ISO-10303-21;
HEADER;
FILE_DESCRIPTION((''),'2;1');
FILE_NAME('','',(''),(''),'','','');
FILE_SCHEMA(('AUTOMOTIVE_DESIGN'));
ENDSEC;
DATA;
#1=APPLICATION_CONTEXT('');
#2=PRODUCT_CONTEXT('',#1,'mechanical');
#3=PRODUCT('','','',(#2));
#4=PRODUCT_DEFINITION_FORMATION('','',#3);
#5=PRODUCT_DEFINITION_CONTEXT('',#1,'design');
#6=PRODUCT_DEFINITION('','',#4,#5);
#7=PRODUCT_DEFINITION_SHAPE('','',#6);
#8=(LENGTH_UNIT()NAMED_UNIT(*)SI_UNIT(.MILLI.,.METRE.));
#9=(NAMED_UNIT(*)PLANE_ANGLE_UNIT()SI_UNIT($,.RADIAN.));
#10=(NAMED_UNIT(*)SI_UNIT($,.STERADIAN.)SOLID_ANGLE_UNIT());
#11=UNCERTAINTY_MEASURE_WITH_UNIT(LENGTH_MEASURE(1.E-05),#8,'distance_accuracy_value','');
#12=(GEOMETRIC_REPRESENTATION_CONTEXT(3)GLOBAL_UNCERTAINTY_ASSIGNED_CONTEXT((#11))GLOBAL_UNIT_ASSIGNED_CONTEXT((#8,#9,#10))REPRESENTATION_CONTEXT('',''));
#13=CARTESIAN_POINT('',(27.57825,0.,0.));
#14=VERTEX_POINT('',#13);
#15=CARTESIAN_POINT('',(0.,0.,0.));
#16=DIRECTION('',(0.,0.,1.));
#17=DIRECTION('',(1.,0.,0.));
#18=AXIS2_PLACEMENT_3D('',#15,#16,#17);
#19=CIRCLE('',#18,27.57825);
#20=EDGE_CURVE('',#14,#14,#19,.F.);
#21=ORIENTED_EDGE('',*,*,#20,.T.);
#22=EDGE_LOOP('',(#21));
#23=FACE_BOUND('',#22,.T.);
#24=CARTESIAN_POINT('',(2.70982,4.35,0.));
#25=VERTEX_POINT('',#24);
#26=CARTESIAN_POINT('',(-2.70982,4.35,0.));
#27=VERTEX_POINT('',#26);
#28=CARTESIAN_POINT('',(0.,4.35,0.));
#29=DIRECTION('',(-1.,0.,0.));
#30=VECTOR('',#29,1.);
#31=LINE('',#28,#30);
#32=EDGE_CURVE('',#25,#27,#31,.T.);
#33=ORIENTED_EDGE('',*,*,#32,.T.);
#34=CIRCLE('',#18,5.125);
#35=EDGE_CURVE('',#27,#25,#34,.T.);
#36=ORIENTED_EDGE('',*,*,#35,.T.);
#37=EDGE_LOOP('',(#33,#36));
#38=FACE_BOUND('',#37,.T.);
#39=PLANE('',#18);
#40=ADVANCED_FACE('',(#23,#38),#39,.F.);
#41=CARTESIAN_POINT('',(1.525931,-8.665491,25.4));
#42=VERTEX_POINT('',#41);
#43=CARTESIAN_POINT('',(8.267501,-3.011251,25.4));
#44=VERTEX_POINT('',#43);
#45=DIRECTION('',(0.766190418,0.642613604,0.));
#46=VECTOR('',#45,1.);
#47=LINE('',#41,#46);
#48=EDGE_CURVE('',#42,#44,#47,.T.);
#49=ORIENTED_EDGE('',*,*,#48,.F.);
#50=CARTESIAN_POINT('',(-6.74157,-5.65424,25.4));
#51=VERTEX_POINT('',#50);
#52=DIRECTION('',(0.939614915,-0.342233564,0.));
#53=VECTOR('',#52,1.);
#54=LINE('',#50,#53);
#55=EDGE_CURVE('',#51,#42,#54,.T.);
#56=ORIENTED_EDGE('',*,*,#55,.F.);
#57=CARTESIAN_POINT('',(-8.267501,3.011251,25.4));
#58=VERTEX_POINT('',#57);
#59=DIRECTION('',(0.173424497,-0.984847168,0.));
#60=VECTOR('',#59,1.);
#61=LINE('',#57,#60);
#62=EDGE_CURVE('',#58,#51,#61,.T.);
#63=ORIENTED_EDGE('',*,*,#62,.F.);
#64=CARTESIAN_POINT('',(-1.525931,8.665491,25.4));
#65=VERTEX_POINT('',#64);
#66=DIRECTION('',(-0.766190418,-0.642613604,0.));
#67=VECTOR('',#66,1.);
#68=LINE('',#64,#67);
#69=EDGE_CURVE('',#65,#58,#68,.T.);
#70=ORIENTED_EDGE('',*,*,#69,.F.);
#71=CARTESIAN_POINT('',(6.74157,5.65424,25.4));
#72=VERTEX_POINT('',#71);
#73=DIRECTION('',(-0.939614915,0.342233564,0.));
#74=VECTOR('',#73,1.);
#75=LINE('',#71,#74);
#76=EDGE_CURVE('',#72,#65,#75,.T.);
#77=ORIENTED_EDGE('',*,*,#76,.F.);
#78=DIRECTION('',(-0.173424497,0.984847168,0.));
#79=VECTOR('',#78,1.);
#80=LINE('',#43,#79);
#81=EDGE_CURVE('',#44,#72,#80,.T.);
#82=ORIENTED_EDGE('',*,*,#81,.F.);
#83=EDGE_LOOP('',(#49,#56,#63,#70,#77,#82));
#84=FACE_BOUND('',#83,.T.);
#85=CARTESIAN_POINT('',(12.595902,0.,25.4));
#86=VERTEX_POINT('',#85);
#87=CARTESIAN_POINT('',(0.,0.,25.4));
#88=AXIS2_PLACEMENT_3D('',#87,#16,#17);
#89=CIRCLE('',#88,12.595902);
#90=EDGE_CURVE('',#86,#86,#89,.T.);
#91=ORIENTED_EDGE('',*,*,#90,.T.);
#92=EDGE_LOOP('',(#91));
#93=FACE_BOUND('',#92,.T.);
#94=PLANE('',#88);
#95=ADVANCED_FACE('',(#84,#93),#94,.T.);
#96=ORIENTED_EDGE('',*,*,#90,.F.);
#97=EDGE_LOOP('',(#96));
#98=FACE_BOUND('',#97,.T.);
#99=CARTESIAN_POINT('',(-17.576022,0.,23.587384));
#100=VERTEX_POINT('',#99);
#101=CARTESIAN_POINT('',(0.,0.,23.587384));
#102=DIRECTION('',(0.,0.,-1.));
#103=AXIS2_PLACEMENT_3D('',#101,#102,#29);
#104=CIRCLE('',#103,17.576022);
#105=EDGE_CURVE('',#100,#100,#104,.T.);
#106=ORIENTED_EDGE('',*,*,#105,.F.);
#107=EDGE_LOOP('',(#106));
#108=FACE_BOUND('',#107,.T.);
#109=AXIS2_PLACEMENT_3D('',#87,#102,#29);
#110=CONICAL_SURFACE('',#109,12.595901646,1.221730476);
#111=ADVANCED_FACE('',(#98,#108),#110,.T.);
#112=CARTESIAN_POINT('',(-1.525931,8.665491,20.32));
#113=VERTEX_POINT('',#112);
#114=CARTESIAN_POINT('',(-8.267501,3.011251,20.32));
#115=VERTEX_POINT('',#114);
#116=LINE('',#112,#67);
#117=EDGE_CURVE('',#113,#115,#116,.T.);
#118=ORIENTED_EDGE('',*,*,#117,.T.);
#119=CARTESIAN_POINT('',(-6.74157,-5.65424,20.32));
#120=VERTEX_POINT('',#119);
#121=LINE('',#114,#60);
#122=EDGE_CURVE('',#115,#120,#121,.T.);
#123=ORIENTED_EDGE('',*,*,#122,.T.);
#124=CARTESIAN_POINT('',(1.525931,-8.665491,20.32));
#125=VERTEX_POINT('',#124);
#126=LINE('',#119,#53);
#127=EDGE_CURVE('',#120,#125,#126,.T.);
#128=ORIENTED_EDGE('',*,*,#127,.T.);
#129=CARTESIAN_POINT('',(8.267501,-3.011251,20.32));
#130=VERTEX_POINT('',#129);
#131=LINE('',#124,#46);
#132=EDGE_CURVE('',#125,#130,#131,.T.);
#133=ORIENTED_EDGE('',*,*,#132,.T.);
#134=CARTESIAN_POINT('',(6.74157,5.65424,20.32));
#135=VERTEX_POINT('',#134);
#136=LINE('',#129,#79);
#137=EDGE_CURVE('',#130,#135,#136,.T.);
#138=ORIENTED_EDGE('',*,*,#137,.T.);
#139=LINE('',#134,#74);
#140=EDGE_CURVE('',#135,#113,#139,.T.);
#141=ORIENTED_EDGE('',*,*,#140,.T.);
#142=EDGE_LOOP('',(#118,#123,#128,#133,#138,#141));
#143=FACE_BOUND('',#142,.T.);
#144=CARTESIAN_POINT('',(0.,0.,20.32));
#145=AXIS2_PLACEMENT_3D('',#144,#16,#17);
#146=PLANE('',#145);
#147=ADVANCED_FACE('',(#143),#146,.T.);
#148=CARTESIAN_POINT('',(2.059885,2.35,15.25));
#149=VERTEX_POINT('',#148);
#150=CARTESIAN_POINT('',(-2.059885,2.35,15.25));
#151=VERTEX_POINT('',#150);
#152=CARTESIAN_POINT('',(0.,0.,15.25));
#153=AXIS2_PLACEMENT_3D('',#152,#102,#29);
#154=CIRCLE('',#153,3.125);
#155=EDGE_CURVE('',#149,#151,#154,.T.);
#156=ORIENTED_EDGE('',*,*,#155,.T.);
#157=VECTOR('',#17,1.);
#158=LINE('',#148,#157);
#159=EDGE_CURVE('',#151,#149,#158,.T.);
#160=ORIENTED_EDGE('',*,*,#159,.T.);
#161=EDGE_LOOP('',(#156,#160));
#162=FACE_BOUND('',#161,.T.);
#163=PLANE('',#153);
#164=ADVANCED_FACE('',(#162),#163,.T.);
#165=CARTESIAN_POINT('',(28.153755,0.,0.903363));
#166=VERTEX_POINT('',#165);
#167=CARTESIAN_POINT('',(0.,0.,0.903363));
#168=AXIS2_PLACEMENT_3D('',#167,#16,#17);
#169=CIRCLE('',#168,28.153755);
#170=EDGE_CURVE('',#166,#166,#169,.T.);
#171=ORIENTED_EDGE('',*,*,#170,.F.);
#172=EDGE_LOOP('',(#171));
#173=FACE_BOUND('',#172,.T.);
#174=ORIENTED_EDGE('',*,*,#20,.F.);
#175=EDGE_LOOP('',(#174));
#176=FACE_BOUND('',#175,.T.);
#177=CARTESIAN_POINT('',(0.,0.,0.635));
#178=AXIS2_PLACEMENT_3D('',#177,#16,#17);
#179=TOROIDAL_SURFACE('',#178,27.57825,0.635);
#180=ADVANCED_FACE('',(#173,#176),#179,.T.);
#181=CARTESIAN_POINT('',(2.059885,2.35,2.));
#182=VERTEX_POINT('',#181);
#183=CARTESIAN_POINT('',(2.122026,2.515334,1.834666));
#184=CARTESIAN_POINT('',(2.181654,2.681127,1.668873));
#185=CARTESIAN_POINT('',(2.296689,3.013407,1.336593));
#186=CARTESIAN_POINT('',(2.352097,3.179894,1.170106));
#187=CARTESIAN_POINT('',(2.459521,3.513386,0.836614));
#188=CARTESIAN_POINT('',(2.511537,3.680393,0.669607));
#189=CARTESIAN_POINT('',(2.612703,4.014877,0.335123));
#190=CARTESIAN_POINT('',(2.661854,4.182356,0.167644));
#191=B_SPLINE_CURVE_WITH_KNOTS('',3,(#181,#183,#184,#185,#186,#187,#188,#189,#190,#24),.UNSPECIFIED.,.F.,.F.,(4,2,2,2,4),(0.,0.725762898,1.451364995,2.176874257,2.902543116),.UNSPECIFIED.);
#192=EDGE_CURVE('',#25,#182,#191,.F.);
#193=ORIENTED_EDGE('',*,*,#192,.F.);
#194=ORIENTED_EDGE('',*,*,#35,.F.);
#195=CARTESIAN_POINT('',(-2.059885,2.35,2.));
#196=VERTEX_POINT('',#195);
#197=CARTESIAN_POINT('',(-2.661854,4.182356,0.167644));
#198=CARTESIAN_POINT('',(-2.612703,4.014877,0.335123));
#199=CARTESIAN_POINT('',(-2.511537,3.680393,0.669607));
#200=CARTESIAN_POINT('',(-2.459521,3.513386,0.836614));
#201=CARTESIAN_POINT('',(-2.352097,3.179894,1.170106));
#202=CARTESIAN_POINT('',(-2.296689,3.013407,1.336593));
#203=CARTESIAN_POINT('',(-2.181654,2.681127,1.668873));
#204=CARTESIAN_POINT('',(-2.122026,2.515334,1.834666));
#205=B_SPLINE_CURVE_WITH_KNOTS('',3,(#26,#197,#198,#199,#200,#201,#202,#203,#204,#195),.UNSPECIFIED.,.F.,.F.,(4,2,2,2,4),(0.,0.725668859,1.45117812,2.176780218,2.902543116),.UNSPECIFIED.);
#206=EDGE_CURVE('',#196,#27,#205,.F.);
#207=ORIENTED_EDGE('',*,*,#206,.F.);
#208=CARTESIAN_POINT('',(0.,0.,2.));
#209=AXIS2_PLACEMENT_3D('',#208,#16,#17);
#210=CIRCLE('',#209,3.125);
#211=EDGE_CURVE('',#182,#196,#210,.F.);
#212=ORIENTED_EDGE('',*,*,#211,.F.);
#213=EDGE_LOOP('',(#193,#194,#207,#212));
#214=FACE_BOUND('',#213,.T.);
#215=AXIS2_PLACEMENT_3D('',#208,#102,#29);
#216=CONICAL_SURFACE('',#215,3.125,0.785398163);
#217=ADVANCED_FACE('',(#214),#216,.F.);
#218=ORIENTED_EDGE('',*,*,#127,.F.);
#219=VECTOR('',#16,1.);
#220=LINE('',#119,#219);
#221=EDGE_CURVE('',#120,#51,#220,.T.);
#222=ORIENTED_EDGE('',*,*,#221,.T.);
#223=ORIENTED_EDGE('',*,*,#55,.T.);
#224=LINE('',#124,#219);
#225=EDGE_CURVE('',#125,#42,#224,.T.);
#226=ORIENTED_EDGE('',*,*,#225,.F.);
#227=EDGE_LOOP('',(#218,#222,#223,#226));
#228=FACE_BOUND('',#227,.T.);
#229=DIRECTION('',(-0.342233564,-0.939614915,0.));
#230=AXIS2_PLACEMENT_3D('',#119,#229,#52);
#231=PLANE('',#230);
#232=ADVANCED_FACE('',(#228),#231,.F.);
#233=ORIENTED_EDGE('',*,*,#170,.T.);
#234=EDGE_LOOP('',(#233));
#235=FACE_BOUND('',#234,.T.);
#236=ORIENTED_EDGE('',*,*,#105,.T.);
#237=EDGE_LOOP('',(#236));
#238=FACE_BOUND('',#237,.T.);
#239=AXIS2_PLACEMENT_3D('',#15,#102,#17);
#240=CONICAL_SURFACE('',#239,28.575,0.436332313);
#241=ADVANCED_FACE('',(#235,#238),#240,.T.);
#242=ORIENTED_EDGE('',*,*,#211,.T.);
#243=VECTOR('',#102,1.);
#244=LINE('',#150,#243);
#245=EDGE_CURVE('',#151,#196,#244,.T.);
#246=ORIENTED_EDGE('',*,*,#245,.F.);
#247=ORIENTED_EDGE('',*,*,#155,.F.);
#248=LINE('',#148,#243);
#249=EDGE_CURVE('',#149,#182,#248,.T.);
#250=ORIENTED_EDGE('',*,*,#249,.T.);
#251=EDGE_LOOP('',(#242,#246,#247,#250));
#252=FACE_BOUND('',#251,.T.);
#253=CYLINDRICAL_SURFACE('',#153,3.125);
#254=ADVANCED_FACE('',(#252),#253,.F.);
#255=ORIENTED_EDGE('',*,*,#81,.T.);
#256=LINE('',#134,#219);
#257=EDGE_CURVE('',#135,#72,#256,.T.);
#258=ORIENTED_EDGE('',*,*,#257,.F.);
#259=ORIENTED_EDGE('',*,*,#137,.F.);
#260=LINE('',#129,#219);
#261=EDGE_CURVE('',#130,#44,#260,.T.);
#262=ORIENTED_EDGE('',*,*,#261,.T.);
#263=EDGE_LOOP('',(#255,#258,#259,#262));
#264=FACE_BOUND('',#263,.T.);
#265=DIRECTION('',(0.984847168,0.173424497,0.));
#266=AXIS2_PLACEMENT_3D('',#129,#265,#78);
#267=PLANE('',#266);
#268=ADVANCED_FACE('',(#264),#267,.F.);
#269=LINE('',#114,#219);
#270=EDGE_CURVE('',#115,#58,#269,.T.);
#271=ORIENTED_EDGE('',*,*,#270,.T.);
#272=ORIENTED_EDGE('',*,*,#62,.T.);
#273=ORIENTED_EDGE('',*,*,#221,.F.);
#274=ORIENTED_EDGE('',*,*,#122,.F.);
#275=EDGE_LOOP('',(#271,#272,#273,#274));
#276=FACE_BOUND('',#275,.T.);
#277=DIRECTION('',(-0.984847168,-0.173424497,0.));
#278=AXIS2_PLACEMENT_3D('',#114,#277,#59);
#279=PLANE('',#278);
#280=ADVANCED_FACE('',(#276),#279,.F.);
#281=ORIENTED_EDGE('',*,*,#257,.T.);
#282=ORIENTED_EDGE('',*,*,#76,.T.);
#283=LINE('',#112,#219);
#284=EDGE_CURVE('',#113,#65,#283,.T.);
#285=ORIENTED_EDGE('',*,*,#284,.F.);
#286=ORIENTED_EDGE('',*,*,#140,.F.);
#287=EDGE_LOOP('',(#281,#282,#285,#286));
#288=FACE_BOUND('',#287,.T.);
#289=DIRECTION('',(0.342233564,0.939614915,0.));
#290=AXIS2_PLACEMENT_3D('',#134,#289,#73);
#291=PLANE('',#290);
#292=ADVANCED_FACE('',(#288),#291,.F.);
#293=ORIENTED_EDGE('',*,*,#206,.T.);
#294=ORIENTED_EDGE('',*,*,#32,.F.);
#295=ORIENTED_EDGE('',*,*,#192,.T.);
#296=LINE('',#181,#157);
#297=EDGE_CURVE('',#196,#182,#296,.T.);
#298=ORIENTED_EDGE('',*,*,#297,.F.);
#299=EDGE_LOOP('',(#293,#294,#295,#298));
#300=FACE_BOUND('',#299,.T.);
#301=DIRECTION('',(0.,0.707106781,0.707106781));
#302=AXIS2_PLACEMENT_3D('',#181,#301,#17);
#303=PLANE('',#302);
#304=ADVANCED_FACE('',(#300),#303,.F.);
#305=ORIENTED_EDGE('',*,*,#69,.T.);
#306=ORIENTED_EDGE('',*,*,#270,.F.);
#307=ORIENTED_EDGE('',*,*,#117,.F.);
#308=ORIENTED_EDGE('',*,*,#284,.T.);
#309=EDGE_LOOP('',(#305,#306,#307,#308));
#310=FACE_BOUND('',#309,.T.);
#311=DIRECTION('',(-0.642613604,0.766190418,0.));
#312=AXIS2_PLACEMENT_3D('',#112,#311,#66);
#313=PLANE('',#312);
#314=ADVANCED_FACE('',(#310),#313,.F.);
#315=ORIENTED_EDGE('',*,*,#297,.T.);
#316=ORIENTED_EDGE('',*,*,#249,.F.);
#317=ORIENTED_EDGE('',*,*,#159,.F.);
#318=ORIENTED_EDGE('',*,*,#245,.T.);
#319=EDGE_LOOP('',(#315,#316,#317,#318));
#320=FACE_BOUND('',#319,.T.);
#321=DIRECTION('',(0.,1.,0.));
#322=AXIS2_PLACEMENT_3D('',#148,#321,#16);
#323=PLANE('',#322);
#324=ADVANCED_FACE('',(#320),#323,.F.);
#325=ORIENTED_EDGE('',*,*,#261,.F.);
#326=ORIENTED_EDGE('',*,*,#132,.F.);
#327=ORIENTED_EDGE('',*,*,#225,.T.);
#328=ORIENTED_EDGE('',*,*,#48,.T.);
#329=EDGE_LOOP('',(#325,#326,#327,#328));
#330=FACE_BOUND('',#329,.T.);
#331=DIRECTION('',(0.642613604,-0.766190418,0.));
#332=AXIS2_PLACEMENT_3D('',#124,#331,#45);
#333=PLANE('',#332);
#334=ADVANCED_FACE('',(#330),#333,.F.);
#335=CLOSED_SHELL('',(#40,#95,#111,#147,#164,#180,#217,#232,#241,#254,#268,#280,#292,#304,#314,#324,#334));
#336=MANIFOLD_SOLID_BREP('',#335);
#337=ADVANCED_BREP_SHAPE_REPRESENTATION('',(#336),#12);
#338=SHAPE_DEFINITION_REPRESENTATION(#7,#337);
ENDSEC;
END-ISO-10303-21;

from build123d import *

# Parameters (mm, degrees)
SKETCH1_R            = 28.575
CONE_EXTRUDE_DEPTH   = 25.4
CONE_EXTRUDE_TAPER   = 25
MOTOR_AXLE_CUT_DEPTH = 15.25
CHAMFER1_SIZE        = 2
CHAMFER1_SIZE_2      = 4.134883836
CHAMFER2_SIZE        = 2
BOLT_HOLE_CUT_DEPTH  = 5.08
FILLET1_R            = 0.635


with BuildPart() as part:
    # Sketch1 → Cone Extrude (new body)
    with BuildSketch(Plane.XY):
        Circle(SKETCH1_R)
    extrude(amount=CONE_EXTRUDE_DEPTH, taper=CONE_EXTRUDE_TAPER)

    # Sketch2 → Motor Axle Cut (cut)
    with BuildSketch(Plane(origin=(0, 0, 0), x_dir=(-1, 0, 0), z_dir=(0, 0, -1))):
        with BuildLine():
            Line((-2.059884706, 2.35), (2.059884706, 2.35))
            ThreePointArc((2.059884706, 2.35), (0, -3.125), (-2.059884706, 2.35))
        make_face()
    extrude(amount=-MOTOR_AXLE_CUT_DEPTH, mode=Mode.SUBTRACT)

    # Chamfer1
    # the kernel refuses this chamfer: 4.134883836, 2 mm, written as the material it takes off along each edge
    with BuildSketch(Plane(origin=(0, 0, 25.4), x_dir=(1, 0, 0), z_dir=(0, 1, 0))) as chamfer1_piece_1:
        Polygon((16.730785483 + CHAMFER1_SIZE * 0.422618261741, CHAMFER1_SIZE * 0.906307787037), (16.730785483 - CHAMFER1_SIZE_2, 0), (16.730785483, 0), align=None)
    revolve(axis=Axis((0, 0, 25.4), (0, 0, -1)), mode=Mode.SUBTRACT)

    # Chamfer2
    chamfer2_edges = [part.edges().sort_by_distance(p)[0] for p in [
        (0, -3.125, 0),
        (0, 2.35, 0),
    ]]
    chamfer(chamfer2_edges, length=CHAMFER2_SIZE)

    # Sketch3 → Bolt Hole Cut (cut)
    with BuildSketch(Plane.XY.offset(25.4)):
        Polygon((6.741570116, 5.654240212), (-1.525930605, 8.665491088), (-8.267500721, 3.011250876), (-6.741570116, -5.654240212), (1.525930605, -8.665491088), (8.267500721, -3.011250876), align=None)
    extrude(amount=-BOLT_HOLE_CUT_DEPTH, mode=Mode.SUBTRACT)

    # Fillet1
    fillet1_edges = [part.edges().sort_by_distance(p)[0] for p in [
        (-28.575, 0, 0),
    ]]
    fillet(fillet1_edges, radius=FILLET1_R)


solid = part.part
